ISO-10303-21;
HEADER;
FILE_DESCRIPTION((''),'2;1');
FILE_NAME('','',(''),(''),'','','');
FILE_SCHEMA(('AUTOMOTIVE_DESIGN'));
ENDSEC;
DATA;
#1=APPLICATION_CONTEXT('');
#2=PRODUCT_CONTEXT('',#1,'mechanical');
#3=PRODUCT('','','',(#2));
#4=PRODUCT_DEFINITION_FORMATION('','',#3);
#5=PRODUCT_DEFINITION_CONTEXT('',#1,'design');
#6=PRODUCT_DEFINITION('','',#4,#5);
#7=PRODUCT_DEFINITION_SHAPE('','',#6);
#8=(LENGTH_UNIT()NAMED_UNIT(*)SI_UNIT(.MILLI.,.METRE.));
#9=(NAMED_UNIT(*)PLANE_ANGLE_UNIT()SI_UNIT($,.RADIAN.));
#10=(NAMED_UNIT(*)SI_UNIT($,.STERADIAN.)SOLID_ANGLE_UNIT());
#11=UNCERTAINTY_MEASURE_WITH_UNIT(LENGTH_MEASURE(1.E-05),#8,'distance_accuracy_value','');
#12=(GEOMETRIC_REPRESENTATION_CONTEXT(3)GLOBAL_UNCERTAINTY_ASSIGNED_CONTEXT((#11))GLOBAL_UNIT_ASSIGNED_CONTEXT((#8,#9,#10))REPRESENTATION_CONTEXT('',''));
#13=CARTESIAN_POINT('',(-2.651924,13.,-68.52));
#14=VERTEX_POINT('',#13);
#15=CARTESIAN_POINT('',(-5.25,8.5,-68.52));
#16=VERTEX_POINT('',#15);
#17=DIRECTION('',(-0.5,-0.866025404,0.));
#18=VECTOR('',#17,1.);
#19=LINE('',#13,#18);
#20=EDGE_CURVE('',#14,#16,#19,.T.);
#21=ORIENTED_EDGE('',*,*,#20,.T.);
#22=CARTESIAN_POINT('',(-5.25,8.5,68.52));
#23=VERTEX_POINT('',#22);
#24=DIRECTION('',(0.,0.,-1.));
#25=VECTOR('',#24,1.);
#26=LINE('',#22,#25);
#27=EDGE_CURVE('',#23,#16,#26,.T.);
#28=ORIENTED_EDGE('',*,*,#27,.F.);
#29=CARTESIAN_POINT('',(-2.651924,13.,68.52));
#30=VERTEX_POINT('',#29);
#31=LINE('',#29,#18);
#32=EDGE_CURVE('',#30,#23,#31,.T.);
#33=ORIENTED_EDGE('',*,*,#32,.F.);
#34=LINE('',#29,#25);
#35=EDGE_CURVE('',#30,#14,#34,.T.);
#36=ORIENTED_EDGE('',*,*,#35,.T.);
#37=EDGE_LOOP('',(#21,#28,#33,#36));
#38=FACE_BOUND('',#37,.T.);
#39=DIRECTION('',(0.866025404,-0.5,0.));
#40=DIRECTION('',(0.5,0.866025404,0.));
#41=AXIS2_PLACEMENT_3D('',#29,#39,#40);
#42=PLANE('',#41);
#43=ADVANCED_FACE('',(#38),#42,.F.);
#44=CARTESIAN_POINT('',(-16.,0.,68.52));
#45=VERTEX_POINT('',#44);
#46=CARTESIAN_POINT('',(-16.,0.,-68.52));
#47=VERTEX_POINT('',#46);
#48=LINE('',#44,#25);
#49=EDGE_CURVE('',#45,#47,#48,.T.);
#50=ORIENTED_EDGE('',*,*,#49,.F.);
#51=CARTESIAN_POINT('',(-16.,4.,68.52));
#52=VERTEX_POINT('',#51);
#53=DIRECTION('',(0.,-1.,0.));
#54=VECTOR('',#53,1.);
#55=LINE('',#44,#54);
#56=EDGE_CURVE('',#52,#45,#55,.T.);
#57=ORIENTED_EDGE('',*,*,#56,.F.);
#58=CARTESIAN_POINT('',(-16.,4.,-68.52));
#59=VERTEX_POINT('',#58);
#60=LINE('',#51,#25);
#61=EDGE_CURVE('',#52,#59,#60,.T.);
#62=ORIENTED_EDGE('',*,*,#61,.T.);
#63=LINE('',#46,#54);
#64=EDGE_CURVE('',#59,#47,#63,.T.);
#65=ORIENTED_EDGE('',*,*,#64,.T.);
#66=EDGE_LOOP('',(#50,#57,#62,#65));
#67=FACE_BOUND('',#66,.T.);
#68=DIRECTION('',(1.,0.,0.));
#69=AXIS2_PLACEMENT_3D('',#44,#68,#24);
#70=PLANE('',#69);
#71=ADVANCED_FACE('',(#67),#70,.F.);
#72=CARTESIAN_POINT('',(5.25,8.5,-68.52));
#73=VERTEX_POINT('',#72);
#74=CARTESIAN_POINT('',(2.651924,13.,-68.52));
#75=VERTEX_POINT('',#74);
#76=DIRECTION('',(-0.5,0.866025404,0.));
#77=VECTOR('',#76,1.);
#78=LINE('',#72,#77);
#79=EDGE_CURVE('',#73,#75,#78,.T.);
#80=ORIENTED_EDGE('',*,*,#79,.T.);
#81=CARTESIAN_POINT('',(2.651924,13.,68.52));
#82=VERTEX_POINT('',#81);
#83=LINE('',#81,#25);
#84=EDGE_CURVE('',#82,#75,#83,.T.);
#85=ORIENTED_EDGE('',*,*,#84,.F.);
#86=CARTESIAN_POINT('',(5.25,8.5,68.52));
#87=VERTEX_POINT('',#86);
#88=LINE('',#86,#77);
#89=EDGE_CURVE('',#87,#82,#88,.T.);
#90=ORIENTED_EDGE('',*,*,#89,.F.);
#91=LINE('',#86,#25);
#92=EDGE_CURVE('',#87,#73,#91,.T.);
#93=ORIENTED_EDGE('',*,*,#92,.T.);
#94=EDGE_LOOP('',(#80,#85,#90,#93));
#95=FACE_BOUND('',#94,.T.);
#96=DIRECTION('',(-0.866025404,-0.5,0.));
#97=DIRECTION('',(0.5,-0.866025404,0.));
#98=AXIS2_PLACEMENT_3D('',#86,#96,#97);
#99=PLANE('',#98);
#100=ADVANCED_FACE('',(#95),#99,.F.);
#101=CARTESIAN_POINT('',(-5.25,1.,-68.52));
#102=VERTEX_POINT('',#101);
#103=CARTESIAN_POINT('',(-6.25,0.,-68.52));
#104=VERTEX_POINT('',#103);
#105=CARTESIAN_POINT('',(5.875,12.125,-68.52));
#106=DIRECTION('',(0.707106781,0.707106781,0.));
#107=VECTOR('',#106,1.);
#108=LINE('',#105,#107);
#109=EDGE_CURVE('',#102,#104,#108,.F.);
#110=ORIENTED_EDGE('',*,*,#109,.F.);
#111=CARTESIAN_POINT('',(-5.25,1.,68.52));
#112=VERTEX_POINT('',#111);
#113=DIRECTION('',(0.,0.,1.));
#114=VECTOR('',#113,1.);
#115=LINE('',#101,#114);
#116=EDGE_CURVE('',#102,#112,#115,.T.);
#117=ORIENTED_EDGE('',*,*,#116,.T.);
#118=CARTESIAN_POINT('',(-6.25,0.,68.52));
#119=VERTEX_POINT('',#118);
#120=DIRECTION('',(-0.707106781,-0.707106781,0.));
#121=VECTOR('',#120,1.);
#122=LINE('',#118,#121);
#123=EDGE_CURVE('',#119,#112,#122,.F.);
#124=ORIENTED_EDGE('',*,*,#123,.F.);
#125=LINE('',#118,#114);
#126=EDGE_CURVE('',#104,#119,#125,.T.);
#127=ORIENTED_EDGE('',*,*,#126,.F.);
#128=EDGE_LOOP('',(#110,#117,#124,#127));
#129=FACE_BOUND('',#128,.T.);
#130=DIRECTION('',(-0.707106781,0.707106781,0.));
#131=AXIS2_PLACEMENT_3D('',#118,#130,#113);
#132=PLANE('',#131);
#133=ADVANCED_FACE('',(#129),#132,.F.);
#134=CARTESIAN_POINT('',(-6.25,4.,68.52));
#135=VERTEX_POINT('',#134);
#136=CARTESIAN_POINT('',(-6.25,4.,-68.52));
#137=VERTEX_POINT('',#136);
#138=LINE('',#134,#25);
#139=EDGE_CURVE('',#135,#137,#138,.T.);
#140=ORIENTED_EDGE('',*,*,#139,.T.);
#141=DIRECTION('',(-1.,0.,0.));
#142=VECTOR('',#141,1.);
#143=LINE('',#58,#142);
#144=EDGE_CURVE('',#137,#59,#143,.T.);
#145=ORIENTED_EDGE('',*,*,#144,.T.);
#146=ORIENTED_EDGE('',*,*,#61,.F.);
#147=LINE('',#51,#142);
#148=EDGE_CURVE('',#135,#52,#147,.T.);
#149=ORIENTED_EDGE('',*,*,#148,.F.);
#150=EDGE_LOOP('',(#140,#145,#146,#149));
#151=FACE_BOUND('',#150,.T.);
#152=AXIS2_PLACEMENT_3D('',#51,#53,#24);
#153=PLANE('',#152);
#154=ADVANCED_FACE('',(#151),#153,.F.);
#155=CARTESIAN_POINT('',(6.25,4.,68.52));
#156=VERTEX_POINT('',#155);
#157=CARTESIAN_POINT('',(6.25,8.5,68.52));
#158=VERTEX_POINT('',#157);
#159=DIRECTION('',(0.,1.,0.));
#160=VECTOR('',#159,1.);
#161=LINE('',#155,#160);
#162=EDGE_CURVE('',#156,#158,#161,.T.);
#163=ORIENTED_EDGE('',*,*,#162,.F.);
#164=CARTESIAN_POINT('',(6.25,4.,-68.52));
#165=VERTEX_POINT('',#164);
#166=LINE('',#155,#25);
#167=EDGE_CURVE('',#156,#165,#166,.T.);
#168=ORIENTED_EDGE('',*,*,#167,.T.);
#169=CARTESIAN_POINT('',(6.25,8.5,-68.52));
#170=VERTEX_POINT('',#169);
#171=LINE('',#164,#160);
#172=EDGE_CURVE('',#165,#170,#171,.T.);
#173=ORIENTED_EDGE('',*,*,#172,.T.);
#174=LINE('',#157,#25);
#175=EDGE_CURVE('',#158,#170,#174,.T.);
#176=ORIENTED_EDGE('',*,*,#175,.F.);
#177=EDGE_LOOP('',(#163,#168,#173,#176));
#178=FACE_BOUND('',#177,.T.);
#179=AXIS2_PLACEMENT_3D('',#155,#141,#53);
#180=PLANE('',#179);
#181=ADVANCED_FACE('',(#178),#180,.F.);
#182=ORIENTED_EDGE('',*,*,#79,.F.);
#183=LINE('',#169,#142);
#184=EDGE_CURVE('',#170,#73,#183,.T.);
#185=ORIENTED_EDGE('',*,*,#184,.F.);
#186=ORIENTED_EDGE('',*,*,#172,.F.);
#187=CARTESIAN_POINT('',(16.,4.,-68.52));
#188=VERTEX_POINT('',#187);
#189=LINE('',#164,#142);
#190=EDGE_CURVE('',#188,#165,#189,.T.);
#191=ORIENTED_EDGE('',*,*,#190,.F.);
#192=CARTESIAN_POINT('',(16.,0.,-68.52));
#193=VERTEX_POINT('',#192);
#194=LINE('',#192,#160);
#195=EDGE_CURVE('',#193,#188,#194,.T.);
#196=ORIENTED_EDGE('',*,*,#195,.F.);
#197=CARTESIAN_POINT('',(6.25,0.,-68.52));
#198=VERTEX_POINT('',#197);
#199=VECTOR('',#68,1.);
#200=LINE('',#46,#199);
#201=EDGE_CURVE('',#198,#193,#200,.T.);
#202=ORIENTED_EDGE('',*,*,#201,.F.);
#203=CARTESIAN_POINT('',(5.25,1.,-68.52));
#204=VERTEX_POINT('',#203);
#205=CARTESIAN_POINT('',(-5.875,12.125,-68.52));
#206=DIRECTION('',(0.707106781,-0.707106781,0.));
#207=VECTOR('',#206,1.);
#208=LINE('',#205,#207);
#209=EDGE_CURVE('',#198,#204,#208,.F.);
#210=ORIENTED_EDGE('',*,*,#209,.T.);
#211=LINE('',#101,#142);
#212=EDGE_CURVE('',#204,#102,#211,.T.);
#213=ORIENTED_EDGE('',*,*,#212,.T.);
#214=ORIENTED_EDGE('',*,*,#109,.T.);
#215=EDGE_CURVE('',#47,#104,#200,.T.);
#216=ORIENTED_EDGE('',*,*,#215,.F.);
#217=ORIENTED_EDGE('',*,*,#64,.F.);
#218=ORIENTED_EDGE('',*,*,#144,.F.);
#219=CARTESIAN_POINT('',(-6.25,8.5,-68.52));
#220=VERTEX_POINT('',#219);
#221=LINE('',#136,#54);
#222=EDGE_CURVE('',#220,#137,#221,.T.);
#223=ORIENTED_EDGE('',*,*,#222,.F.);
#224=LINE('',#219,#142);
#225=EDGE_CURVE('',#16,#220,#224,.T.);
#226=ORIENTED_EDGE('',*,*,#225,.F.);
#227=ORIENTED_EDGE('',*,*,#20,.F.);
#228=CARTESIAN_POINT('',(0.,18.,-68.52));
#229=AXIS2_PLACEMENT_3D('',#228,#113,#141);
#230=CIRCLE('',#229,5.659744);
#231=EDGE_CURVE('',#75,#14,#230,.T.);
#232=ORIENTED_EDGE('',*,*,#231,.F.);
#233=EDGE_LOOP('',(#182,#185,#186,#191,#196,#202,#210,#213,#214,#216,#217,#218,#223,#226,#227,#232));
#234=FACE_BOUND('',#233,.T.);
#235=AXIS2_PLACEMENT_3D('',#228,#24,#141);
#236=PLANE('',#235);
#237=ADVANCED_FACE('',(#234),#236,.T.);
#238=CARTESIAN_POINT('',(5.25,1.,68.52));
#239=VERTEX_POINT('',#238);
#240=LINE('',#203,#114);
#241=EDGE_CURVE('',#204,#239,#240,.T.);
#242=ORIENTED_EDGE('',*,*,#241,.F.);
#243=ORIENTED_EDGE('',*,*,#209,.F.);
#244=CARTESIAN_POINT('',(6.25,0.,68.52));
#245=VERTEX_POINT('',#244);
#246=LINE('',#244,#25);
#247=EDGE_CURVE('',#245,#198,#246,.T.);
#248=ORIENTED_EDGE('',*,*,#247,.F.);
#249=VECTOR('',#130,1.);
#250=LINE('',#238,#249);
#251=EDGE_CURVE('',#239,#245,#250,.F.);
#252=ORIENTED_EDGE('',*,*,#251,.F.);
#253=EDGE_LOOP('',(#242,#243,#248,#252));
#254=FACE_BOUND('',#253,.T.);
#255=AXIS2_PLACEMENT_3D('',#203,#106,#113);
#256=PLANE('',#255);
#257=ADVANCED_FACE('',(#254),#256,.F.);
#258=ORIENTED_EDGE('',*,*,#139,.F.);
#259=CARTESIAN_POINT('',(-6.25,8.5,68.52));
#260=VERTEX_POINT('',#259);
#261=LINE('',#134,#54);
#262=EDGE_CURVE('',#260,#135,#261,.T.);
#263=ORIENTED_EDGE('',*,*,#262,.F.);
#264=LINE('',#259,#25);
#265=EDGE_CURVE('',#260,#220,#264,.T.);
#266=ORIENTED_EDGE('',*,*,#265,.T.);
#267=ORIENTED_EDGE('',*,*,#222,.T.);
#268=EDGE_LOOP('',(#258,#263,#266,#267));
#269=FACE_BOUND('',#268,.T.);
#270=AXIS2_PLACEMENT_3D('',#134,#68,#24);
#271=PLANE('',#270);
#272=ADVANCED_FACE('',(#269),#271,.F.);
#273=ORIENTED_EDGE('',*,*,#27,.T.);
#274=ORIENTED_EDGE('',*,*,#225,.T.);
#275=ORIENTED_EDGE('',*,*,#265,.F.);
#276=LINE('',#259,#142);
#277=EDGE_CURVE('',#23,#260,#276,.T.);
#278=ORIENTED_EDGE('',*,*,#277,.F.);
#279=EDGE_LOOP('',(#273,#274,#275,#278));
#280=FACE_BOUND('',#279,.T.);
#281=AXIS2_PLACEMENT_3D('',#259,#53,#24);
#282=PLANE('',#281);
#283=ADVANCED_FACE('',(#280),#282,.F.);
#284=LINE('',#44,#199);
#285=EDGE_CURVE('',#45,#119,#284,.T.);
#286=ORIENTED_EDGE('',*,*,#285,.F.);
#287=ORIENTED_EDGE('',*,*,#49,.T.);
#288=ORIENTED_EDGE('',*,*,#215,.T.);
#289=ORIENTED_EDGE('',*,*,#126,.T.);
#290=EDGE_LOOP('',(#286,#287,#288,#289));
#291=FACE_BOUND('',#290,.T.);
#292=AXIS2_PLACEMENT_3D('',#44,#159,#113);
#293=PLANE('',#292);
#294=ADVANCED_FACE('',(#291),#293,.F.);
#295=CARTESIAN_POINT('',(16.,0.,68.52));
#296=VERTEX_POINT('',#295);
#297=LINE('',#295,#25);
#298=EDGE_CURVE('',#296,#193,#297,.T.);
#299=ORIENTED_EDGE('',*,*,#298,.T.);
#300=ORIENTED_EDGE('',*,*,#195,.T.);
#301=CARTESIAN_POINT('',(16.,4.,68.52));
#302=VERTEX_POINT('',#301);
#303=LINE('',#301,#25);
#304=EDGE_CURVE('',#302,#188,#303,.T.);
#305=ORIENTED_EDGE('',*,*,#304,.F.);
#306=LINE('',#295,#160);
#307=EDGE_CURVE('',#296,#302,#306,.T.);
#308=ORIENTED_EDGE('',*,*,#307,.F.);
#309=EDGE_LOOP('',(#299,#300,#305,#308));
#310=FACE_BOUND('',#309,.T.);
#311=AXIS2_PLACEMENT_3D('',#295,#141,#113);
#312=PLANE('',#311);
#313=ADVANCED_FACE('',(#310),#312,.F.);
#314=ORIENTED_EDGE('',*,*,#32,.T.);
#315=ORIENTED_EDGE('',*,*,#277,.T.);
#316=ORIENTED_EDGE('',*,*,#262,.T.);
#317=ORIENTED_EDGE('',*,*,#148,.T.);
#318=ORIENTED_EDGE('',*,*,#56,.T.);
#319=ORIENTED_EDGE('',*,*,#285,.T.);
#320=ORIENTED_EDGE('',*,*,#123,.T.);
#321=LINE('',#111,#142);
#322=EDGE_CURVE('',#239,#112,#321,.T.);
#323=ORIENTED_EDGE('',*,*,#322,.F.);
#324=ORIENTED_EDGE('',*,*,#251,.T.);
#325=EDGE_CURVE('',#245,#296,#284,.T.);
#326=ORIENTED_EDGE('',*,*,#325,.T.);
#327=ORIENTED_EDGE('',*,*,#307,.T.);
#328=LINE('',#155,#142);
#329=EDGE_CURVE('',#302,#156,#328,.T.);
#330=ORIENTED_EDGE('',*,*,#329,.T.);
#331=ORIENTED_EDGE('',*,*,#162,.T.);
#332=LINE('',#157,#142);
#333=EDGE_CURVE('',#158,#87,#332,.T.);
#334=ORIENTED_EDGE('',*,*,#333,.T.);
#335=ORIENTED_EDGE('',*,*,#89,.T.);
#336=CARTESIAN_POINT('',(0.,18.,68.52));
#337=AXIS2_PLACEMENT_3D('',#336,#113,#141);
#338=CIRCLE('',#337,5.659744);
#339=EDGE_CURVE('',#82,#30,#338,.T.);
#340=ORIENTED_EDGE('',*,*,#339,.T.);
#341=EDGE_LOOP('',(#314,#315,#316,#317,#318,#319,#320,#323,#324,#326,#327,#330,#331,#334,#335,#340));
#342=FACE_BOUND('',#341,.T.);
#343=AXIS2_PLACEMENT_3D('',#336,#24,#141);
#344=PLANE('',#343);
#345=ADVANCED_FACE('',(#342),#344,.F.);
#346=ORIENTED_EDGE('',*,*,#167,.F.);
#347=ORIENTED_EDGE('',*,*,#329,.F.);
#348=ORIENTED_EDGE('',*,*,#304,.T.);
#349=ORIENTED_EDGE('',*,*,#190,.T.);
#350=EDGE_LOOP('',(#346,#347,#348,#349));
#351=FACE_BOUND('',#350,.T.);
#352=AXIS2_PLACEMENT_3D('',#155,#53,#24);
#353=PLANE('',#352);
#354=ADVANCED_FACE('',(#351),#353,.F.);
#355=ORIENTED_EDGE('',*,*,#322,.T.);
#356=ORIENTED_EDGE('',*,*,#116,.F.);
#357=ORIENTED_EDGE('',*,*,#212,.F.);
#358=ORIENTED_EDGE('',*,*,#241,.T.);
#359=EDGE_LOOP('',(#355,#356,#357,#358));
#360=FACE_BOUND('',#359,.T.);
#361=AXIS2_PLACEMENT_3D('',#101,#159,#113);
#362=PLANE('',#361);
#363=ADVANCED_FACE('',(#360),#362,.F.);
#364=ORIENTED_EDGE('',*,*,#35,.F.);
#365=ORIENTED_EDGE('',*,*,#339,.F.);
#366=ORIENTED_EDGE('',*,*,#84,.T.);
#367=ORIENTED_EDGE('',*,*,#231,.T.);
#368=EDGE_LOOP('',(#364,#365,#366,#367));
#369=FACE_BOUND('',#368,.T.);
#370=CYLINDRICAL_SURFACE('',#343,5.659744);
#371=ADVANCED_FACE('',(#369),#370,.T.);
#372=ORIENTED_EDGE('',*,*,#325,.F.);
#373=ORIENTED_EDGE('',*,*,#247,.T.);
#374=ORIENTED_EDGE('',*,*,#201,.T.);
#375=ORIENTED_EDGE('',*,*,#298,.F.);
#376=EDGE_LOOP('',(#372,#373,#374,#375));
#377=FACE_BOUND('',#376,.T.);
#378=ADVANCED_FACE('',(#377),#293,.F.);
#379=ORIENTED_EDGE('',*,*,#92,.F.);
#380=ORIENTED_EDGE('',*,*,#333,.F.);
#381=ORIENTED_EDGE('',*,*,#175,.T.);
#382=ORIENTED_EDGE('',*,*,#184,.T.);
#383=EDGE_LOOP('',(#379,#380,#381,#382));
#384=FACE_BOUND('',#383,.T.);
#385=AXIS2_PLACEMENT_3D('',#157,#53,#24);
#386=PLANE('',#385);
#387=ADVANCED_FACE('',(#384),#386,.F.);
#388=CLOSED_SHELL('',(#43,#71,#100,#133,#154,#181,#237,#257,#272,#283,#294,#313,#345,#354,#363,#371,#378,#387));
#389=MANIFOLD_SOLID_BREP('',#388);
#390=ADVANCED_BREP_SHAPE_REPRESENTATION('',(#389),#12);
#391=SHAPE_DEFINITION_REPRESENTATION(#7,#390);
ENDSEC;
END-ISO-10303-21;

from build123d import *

# Parameters (mm, degrees)
EXTRUDE_1_DEPTH     = 68.52
SKETCH_2_W          = 10.5
SKETCH_2_H          = 1
CUT_EXTRUDE_1_DEPTH = 140.984803019
CHAMFER_1_SIZE      = 1


with BuildPart() as part:
    # 草图1 → 凸台-拉伸1 (new, symmetric)
    with BuildSketch(Plane.XY):
        with BuildLine():
            Line((-16, 0), (16, 0))
            Line((16, 0), (16, 4))
            Line((16, 4), (6.25, 4))
            Line((6.25, 4), (6.25, 8.5))
            Line((6.25, 8.5), (5.25, 8.5))
            Line((5.25, 8.5), (2.651923789, 13))
            ThreePointArc((2.651923789, 13), (0, 23.659743791), (-2.651923789, 13))
            Line((-2.651923789, 13), (-5.25, 8.5))
            Line((-5.25, 8.5), (-6.25, 8.5))
            Line((-6.25, 8.5), (-6.25, 4))
            Line((-6.25, 4), (-16, 4))
            Line((-16, 4), (-16, 0))
        make_face()
    extrude(amount=EXTRUDE_1_DEPTH, both=True)

    # 草图2 → 切除-拉伸1 (cut, through all)
    with BuildSketch(Plane.XY.offset(68.52)):
        with Locations((0, 0.5)):
            Rectangle(SKETCH_2_W, SKETCH_2_H)
    extrude(amount=-CUT_EXTRUDE_1_DEPTH, mode=Mode.SUBTRACT)

    # 倒角1
    chamfer_1_edges = [part.edges().sort_by_distance(p)[0] for p in [
        (5.25, 0, 0),
        (-5.25, 0, 0),
    ]]
    chamfer(chamfer_1_edges, length=CHAMFER_1_SIZE - 0.0001)  # a hair under: the kernel refuses the full size


solid = part.part
